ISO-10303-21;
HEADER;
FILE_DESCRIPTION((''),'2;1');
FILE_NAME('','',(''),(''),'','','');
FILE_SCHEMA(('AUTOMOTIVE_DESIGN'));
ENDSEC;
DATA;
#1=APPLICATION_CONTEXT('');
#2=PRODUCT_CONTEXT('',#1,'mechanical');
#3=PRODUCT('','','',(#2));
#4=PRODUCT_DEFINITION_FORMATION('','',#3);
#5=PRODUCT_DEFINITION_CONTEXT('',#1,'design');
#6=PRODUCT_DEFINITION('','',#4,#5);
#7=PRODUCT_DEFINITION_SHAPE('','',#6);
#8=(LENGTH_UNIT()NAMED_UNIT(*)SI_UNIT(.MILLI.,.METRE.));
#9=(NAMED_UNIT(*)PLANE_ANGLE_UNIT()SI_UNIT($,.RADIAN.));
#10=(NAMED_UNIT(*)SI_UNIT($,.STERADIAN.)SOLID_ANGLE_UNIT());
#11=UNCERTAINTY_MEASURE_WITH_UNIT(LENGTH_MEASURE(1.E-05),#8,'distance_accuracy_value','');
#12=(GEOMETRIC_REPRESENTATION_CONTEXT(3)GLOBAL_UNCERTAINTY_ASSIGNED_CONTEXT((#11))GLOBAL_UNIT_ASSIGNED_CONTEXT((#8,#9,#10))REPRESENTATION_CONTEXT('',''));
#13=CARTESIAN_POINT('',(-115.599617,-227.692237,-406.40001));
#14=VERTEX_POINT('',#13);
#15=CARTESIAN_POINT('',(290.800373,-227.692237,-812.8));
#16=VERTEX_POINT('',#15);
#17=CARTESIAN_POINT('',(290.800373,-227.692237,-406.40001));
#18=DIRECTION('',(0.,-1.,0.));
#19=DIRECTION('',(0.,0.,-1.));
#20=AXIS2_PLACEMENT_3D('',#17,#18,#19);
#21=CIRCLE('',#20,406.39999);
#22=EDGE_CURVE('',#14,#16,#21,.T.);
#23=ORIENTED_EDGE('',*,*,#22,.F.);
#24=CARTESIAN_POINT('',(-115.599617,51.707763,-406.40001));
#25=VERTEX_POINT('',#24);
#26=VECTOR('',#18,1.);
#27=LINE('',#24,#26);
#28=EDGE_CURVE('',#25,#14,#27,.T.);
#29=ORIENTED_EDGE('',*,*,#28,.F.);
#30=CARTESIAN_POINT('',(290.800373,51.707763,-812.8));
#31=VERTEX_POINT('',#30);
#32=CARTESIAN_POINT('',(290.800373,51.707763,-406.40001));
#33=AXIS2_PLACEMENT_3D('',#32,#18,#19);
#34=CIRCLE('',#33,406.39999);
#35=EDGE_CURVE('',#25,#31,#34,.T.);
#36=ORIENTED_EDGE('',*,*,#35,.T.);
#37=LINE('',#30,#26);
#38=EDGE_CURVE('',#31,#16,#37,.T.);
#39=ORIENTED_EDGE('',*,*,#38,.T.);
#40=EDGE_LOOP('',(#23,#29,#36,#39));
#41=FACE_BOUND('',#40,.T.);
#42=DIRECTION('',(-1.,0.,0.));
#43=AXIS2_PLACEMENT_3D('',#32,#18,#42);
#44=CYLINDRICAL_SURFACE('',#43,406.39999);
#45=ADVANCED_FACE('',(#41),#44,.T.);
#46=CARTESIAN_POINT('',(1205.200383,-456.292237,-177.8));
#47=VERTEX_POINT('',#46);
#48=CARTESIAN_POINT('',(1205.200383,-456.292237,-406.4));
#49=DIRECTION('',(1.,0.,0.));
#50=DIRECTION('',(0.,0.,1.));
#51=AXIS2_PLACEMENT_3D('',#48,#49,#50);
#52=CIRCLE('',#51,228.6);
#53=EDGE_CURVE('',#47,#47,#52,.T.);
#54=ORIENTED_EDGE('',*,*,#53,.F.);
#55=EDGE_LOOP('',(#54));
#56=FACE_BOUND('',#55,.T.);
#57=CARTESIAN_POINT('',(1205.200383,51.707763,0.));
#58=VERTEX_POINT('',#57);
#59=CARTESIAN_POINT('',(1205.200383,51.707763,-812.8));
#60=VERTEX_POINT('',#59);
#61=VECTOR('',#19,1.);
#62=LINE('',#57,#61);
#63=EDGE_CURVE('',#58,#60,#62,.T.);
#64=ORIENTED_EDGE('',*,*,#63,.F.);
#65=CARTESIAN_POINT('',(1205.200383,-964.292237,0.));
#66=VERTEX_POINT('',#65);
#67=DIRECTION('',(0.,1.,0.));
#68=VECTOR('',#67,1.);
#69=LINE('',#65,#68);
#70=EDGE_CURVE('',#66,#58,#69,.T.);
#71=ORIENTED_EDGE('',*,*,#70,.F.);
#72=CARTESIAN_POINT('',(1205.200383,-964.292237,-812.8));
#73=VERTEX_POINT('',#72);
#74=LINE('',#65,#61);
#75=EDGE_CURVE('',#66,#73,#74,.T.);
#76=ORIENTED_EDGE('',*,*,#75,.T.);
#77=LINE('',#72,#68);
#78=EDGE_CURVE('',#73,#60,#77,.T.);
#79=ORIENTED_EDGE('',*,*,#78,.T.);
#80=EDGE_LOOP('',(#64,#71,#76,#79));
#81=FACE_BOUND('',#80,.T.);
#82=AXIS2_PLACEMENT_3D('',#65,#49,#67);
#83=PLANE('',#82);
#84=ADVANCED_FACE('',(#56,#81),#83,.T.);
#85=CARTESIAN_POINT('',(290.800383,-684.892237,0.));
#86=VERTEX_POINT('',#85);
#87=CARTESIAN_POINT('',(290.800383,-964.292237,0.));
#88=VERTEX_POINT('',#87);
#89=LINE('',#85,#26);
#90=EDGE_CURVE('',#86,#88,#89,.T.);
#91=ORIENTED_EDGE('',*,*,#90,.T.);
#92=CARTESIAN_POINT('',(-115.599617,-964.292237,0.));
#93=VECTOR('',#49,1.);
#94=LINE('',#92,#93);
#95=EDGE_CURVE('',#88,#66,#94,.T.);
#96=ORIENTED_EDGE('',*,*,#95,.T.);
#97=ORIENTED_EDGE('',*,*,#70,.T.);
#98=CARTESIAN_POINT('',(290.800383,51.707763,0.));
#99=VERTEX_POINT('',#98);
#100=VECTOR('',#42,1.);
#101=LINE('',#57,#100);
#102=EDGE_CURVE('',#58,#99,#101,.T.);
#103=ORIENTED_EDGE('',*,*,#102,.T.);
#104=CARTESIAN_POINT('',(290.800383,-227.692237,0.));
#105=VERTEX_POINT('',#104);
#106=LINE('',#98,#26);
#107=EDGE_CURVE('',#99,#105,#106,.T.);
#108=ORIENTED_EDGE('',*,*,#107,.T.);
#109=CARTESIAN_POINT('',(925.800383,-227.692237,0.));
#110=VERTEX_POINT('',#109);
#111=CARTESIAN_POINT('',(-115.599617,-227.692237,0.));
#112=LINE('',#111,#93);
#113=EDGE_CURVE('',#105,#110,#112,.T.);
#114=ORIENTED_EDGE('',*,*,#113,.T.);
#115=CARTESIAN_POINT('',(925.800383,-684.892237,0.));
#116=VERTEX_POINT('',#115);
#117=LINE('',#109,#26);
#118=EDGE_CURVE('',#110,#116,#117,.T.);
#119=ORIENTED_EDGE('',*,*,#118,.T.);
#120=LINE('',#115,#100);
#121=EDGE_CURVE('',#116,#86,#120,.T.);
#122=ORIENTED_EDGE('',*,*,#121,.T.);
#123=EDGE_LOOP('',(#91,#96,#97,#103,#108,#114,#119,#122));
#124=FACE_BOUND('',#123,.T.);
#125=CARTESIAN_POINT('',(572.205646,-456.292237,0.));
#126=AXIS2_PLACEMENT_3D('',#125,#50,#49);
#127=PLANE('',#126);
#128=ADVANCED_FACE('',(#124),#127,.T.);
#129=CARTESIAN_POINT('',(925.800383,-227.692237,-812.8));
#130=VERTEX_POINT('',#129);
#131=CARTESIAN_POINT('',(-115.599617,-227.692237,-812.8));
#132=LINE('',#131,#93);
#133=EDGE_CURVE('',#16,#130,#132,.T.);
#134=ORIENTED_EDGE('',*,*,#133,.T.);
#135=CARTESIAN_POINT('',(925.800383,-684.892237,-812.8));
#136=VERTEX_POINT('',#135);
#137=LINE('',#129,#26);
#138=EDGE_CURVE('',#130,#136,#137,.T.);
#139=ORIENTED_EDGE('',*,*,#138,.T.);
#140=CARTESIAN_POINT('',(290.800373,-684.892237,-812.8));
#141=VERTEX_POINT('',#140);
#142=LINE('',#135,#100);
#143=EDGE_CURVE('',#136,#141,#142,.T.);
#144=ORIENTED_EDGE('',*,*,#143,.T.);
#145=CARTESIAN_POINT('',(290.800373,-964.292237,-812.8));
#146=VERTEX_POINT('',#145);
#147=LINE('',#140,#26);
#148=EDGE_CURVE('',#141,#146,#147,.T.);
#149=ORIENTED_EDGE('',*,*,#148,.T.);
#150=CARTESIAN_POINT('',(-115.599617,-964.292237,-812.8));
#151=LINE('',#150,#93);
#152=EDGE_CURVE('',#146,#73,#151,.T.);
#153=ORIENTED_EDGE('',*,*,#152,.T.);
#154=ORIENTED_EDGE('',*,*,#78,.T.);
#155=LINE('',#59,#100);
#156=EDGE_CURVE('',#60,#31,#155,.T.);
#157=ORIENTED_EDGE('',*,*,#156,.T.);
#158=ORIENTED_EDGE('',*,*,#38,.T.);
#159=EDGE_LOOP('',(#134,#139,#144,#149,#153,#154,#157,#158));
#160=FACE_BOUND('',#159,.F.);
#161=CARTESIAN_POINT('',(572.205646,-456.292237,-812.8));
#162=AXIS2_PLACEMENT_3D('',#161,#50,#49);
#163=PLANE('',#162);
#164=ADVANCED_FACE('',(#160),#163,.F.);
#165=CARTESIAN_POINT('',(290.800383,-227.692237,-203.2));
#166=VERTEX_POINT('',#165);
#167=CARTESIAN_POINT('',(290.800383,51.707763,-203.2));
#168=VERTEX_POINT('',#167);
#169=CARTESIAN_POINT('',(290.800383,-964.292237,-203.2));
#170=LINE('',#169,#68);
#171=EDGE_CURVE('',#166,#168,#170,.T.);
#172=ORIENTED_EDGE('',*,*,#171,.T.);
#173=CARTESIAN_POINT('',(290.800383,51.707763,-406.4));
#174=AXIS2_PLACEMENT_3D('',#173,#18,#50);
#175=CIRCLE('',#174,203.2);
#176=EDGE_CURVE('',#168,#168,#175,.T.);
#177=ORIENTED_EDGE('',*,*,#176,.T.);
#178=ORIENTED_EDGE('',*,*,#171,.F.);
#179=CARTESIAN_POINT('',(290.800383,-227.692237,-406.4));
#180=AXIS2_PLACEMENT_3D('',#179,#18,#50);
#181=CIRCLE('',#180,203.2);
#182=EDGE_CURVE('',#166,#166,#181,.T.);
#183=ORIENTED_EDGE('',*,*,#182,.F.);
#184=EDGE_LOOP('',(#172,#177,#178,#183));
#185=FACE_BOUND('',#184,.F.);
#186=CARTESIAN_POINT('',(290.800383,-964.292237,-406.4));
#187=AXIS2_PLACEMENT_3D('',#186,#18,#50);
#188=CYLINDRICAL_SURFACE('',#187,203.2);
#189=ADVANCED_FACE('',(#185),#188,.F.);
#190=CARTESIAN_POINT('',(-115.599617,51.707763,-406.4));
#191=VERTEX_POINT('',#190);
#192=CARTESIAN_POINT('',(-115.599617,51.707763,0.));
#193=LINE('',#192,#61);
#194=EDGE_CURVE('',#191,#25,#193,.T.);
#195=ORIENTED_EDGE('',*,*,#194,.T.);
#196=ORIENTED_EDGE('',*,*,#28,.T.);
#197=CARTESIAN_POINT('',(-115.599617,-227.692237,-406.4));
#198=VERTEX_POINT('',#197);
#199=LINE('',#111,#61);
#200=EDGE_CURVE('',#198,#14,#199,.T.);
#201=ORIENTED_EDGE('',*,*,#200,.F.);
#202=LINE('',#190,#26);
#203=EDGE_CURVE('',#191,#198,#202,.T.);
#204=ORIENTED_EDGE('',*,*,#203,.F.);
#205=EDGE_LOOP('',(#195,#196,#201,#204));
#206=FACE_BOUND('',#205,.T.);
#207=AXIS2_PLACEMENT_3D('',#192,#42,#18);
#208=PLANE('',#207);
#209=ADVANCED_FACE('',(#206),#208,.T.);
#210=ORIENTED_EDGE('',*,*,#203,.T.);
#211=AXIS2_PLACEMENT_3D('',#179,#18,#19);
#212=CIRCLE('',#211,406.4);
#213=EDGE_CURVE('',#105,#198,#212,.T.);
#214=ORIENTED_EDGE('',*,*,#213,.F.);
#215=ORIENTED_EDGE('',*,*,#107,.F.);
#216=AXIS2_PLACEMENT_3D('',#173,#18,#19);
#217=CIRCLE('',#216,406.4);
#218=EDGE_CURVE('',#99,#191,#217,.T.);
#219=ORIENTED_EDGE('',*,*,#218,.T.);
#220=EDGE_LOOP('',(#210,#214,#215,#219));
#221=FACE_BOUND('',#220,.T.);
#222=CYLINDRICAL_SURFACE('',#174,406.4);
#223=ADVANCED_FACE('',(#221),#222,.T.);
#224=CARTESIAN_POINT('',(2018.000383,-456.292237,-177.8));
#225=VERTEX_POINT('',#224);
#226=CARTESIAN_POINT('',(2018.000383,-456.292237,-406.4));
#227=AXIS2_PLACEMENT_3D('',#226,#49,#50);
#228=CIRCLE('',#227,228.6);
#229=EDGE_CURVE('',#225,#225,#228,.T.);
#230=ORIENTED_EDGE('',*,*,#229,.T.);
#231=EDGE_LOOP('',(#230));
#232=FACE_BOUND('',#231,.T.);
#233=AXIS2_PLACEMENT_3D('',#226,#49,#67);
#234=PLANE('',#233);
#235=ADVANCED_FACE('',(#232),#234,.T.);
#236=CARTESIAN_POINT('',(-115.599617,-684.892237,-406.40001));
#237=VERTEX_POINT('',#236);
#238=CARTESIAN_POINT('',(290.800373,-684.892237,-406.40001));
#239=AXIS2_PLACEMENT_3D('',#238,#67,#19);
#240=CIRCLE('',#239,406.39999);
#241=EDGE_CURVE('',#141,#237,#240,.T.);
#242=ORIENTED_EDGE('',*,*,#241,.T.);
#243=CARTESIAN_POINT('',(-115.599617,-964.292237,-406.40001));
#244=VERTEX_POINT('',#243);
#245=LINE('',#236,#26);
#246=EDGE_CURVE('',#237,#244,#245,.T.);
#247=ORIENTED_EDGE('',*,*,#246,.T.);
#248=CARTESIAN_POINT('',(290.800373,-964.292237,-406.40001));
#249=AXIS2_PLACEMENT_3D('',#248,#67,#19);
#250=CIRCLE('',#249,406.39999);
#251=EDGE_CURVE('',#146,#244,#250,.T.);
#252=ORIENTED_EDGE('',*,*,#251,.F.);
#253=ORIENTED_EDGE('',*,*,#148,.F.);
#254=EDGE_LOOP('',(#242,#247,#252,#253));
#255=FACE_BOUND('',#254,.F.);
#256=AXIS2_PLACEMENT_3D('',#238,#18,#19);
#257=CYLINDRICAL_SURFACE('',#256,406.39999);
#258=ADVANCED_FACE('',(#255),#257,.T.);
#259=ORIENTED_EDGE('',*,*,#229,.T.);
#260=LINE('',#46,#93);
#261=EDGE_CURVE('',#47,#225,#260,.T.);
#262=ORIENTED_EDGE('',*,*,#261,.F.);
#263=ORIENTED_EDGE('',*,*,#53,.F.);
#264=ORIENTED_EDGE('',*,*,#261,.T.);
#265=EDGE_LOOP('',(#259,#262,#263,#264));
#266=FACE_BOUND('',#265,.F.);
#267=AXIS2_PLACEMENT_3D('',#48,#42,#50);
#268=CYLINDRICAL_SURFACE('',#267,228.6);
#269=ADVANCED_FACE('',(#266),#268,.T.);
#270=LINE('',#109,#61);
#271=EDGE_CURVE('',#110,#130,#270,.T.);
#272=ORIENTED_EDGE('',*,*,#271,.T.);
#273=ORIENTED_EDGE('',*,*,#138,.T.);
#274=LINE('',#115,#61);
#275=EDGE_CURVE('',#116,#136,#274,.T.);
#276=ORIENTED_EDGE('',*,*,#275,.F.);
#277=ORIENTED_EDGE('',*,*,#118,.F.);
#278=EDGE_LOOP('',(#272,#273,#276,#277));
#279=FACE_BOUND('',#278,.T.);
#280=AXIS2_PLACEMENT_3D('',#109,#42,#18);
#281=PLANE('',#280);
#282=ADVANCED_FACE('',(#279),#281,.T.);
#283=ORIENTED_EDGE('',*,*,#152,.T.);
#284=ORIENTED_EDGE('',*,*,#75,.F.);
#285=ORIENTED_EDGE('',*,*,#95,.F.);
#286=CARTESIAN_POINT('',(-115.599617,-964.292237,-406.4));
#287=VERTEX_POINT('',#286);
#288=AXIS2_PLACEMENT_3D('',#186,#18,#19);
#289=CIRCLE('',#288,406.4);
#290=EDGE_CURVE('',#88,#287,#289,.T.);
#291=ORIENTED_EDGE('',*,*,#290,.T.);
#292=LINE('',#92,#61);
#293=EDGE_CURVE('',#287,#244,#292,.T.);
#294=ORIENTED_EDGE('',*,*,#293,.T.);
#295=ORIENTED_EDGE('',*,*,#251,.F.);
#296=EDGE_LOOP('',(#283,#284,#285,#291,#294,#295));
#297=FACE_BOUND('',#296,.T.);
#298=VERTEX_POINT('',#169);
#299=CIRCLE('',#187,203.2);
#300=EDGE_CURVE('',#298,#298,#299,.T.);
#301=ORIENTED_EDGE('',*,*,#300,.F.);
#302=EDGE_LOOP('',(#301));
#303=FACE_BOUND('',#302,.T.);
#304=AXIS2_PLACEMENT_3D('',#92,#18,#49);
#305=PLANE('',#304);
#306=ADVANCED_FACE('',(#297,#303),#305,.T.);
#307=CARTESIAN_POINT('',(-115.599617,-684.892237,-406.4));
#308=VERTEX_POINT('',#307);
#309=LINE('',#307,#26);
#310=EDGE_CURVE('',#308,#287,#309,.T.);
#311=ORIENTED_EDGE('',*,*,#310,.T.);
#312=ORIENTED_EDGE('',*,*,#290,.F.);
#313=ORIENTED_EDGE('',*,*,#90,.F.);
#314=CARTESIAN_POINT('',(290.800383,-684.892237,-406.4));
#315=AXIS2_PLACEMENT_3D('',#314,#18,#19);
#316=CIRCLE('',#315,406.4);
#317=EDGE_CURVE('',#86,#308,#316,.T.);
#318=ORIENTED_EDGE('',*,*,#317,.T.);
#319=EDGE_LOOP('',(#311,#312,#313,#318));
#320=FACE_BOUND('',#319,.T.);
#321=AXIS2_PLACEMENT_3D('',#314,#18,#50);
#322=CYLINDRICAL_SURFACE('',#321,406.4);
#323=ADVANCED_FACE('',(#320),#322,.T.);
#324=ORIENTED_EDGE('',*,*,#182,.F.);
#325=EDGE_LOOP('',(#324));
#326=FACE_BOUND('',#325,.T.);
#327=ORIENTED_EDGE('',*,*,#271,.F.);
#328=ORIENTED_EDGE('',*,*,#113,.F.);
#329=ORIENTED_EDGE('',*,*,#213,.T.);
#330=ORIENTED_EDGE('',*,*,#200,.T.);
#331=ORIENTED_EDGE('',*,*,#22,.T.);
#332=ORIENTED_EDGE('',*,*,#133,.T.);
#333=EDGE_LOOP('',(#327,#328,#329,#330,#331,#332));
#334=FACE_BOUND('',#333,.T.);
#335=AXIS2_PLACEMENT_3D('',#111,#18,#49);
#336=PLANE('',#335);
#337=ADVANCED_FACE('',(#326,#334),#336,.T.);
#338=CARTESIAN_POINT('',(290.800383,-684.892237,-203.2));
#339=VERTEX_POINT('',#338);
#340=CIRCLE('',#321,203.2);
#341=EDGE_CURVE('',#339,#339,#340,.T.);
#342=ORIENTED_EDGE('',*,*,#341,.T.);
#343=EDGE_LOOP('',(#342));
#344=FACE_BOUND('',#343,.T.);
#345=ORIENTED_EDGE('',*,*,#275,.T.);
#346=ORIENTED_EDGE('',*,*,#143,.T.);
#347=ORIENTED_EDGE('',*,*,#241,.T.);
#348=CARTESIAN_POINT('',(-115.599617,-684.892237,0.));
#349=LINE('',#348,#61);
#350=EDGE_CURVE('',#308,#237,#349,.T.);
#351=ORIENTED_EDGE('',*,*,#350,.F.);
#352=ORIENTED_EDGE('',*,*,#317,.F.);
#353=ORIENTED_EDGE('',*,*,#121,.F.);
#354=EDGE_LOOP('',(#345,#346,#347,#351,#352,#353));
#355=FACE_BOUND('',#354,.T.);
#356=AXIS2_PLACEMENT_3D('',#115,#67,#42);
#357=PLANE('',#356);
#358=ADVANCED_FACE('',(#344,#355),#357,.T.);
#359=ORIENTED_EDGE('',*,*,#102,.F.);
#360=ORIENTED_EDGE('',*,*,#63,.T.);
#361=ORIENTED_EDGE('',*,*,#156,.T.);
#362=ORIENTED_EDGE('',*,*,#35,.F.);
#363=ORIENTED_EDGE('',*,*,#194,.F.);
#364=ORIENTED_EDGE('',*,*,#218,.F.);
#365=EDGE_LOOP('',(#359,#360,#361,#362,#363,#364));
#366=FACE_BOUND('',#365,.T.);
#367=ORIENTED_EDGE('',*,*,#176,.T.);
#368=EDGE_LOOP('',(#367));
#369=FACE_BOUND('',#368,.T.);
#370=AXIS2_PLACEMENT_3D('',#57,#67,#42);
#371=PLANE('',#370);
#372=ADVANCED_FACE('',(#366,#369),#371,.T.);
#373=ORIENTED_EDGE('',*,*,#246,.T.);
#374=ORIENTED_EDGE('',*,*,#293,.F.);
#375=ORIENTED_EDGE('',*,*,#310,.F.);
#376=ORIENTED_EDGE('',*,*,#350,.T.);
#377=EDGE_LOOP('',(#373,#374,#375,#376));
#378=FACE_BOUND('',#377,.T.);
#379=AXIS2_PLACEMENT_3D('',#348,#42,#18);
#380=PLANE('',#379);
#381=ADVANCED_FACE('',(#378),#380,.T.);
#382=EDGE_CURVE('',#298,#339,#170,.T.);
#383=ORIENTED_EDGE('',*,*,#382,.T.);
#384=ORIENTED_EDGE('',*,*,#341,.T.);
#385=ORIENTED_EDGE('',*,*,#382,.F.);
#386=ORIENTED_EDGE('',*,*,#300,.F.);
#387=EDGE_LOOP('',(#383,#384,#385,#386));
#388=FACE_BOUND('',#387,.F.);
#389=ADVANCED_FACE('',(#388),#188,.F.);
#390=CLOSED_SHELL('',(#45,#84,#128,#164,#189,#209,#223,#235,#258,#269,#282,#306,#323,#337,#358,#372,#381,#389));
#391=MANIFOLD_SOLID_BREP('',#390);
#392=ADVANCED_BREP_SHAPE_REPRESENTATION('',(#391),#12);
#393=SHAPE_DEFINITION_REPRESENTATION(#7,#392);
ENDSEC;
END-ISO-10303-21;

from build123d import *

# Parameters (mm, degrees)
F1_DEPTH = 812.8
F3_DEPTH = 1016.001
F4_R     = 406.4
F5_R     = 406.39999
F7_DEPTH = 812.8


# Not quite as in the source:
# - a fillet or chamfer is up to 0.001 mm smaller than in the source, because OpenCascade refuses the exact size


with BuildPart() as f1:
    # F0 (on Top) → F1 (new body)
    with BuildSketch(Plane.XY):
        Polygon((1205.200382638, 51.7077632248), (-115.599617362, 51.7077632248), (-115.599617362, -227.6922367752), (925.800382638, -227.6922367752), (925.800382638, -684.8922367752), (-115.599617362, -684.8922367752), (-115.599617362, -964.2922367752), (1205.200382638, -964.2922367752), (1205.200382638, -227.6922367752), align=None)
    extrude(amount=-F1_DEPTH)

    # F2 (on face) → F3 (cut, through all)
    with BuildSketch(Plane.XZ.offset(964.2922367752)):
        with BuildLine():
            ThreePointArc((494.000382638, -406.4), (434.4844805751, -262.7159020629), (290.800382638, -203.2))
            ThreePointArc((290.800382638, -203.2), (147.1162847009, -550.0840979371), (494.000382638, -406.4))
        make_face()
    extrude(amount=-F3_DEPTH, mode=Mode.SUBTRACT)

    # F4
    f4_edges = [f1.edges().sort_by_distance(p)[0] for p in [
        (-115.599617, -87.992237, 0),
        (-115.599617, -824.592237, 0),
    ]]
    fillet(f4_edges, radius=F4_R)

    # F5 (radius 406.4 in the source; OpenCascade refuses exactly that, so slightly less here)
    f5_edges = [f1.edges().sort_by_distance(p)[0] for p in [
        (-115.599617, -87.992237, -812.8),
        (-115.599617, -824.592237, -812.8),
    ]]
    fillet(f5_edges, radius=F5_R)

    # F6 (on face) → F7 (join)
    with BuildSketch(Plane.YZ.offset(1205.200382638)):
        with BuildLine():
            ThreePointArc((-227.6922367752, -406.4), (-294.6476265959, -244.7553898208), (-456.2922367752, -177.8))
            ThreePointArc((-456.2922367752, -177.8), (-617.9368469544, -568.0446101792), (-227.6922367752, -406.4))
        make_face()
    extrude(amount=F7_DEPTH)


solid = f1.part
